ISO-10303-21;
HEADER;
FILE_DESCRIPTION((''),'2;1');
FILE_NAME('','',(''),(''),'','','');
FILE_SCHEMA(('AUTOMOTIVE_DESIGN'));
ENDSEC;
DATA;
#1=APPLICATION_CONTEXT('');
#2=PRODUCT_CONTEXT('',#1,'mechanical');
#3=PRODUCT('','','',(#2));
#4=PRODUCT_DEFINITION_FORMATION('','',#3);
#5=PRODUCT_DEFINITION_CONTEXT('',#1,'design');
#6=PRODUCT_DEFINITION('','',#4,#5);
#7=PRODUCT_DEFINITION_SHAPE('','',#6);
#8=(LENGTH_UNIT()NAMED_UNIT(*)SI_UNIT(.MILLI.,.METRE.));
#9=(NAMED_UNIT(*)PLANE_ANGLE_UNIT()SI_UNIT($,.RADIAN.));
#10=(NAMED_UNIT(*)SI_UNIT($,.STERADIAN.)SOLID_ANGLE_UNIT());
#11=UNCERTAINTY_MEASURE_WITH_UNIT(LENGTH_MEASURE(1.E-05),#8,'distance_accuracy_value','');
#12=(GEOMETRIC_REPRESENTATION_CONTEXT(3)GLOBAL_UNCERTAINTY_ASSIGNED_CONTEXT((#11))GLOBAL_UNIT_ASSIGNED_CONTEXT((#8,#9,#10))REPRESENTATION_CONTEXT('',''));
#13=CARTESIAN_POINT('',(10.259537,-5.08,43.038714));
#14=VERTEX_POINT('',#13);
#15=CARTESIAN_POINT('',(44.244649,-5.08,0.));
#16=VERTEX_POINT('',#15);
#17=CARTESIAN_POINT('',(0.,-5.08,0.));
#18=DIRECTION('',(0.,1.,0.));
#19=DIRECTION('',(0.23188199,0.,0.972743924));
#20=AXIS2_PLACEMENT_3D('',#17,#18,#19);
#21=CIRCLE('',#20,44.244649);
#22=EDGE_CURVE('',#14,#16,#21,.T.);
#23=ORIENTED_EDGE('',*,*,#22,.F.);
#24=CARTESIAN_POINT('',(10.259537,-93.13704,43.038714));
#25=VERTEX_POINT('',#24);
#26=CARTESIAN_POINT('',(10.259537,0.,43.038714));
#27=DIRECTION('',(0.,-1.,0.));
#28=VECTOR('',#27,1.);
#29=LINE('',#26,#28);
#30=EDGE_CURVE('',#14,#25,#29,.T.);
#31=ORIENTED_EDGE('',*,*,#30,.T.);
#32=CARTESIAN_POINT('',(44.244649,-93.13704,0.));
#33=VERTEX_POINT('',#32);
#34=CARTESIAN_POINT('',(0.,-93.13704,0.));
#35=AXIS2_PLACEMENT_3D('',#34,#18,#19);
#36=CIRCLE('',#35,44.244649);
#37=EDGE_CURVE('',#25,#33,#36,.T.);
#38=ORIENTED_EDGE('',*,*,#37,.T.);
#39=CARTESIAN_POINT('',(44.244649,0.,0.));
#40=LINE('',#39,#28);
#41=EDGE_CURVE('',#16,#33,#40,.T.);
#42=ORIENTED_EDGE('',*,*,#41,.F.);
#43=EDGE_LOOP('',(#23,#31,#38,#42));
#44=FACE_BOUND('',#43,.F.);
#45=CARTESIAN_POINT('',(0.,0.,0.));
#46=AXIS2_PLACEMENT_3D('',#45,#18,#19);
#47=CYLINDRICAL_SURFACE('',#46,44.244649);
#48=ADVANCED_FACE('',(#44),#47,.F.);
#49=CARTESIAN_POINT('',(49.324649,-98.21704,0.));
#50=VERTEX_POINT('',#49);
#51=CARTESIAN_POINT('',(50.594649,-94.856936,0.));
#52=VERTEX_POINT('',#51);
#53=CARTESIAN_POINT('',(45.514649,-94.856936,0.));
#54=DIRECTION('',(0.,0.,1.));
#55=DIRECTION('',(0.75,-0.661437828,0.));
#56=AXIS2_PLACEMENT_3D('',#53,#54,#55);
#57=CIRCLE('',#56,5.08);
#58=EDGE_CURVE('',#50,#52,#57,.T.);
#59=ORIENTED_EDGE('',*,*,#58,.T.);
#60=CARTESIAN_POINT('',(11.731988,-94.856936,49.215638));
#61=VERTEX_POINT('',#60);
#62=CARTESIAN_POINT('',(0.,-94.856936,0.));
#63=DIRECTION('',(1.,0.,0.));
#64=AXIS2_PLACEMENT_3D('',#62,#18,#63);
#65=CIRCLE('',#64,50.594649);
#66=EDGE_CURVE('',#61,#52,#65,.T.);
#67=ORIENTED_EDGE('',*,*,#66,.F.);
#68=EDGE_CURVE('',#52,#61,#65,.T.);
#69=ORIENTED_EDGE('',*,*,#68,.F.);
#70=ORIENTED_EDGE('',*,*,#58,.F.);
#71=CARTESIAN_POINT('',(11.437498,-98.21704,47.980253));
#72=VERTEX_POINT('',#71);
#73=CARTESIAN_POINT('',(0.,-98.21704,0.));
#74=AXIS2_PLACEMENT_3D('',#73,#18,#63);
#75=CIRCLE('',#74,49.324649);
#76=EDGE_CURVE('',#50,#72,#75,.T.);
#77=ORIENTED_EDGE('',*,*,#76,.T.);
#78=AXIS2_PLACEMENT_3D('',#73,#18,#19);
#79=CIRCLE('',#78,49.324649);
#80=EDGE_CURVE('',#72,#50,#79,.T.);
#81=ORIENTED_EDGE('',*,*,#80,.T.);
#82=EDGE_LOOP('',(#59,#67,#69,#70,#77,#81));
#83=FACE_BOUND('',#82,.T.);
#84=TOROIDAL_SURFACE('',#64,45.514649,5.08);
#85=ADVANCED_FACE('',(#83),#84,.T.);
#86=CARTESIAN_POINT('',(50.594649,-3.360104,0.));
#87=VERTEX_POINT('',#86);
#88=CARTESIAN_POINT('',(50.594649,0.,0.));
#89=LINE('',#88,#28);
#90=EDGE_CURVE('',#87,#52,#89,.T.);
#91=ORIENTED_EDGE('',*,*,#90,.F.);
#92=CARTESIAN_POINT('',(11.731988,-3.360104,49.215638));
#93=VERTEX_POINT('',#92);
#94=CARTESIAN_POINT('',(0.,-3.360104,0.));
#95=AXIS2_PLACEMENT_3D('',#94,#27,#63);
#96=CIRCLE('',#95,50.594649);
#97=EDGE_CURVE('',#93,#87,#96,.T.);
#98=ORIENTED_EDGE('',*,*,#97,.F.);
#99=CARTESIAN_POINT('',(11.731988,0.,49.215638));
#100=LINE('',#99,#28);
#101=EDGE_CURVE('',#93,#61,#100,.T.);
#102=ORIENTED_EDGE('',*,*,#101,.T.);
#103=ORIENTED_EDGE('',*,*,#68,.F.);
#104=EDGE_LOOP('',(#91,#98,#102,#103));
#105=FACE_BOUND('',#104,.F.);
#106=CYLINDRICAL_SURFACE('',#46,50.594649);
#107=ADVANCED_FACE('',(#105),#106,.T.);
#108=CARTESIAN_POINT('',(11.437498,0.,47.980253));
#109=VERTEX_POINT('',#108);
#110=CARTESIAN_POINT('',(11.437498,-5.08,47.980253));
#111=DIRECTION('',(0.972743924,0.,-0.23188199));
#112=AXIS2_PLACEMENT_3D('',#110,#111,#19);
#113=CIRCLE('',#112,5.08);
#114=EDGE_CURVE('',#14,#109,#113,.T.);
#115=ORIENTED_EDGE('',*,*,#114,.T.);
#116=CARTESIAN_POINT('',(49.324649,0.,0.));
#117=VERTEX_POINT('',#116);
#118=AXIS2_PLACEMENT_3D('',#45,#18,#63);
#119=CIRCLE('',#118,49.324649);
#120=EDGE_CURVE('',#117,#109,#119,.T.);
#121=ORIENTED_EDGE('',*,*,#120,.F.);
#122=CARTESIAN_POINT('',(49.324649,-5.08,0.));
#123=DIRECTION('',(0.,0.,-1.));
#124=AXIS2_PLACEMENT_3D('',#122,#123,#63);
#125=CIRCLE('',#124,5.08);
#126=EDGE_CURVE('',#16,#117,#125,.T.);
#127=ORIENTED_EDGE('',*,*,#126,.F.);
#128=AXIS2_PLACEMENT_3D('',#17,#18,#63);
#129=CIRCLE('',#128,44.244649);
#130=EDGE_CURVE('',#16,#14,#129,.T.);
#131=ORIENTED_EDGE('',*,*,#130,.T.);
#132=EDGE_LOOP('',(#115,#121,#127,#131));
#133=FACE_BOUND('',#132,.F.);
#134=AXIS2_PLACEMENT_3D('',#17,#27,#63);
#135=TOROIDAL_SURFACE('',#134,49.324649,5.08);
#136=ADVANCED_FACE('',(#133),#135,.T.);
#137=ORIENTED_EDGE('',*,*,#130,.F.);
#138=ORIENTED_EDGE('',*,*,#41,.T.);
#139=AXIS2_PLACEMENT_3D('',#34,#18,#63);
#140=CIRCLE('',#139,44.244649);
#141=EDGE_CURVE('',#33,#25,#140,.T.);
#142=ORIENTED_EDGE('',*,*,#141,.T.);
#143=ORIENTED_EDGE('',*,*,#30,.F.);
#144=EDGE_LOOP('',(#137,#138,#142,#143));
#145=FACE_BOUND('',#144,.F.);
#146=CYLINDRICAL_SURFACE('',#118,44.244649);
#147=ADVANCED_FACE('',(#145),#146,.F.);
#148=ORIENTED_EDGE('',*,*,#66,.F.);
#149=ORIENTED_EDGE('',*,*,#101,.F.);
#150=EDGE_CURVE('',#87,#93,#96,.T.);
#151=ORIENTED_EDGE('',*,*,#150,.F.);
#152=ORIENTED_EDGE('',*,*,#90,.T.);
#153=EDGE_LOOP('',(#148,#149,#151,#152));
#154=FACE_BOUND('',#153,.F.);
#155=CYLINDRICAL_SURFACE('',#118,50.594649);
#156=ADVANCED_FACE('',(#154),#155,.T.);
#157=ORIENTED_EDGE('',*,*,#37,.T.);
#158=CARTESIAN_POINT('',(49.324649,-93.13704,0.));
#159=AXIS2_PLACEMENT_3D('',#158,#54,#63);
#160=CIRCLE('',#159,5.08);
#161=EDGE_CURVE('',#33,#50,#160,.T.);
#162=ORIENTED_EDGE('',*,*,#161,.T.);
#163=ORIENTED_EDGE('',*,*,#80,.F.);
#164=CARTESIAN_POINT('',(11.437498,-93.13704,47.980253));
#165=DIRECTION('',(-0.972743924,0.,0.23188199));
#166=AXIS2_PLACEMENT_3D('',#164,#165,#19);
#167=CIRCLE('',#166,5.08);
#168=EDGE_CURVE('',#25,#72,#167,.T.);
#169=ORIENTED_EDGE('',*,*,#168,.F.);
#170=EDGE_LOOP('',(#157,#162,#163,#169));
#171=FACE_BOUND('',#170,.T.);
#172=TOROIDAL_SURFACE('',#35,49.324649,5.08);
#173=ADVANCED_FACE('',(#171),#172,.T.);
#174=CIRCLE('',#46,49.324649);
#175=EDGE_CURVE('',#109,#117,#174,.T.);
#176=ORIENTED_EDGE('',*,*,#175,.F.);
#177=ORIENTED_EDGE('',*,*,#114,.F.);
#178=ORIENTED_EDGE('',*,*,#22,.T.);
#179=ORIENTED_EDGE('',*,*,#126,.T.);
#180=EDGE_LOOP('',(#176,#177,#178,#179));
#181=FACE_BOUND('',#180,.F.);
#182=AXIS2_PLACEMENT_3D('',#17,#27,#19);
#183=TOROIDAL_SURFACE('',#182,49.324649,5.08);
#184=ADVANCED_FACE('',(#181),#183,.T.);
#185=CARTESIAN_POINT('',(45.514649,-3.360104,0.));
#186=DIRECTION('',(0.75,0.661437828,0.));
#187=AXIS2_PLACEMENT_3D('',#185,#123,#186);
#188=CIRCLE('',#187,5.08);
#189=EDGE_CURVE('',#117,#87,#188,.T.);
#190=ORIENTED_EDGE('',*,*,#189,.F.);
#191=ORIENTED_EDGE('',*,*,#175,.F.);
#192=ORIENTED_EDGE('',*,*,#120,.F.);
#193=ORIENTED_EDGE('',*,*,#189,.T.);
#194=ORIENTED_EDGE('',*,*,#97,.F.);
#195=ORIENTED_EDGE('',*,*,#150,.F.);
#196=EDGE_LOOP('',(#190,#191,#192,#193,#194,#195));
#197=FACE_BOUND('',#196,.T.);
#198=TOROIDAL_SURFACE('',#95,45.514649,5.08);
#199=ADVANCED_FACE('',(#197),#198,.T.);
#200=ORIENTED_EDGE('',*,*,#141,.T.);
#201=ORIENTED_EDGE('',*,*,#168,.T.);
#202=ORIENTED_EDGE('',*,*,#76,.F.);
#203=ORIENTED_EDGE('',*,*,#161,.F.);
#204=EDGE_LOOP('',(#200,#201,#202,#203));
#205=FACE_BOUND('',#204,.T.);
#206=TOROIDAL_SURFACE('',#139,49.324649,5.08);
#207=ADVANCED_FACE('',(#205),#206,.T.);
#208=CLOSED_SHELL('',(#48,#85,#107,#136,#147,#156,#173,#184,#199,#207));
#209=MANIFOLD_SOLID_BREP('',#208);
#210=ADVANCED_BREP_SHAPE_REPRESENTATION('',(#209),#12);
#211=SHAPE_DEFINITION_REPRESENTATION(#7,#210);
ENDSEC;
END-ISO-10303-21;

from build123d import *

# Parameters (mm, degrees)
F1_DEPTH = 98.21704
F2_R     = 5.08
F4_R     = 5.08


# Not quite as in the source:
# - a fillet or chamfer that OpenCascade refuses, or shapes differently, is made with other operations: its cross-section is extruded or revolved along the edge and cut away or added


with BuildPart() as f1:
    # F0 (on Front) → F1 (new body)
    with BuildSketch(Plane.XZ):
        with BuildLine():
            ThreePointArc((11.7319880136, 49.2156378568), (-39.7076464503, -31.3547662371), (50.5946494444, 0))
            ThreePointArc((50.5946494444, 0), (39.7076464503, 31.3547662371), (11.7319880136, 49.2156378568))
        make_face()
        with BuildLine():
            ThreePointArc((44.2446494444, 0), (-34.7240452646, -27.4195128498), (10.2595373749, 43.0387139366))
            ThreePointArc((10.2595373749, 43.0387139366), (34.7240452646, 27.4195128498), (44.2446494444, 0))
        make_face(mode=Mode.SUBTRACT)
    extrude(amount=F1_DEPTH)

    # F2
    f2_edges = [f1.edges().sort_by_distance(p)[0] for p in [
        (-10.259537, -98.21704, -43.038714),
    ]]
    fillet(f2_edges, radius=F2_R)

    # F3: fillet of radius 5.08 on 1 edges, made by hand

    # F3_s1 → F3_t2 (revolve, cut)
    with BuildSketch(Plane.XY):
        with BuildLine():
            ThreePointArc((49.3246494444, -98.21704), (50.2665543256, -96.6529870592), (50.5946494444, -94.8569358349))
            Line((50.5946494444, -94.8569358349), (50.5946494444, -98.21704))
            Line((50.5946494444, -98.21704), (49.3246494444, -98.21704))
        make_face()
    revolve(axis=Axis((0, -98.21704, 0), (0, 1, 0)), mode=Mode.SUBTRACT)

    # F4
    f4_edges = [f1.edges().sort_by_distance(p)[0] for p in [
        (-10.259537, 0, -43.038714),
    ]]
    fillet(f4_edges, radius=F4_R)

    # F5: fillet of radius 5.08 on 1 edges, made by hand

    # F5_s1 → F5_t2 (revolve, cut)
    with BuildSketch(Plane.XY):
        with BuildLine():
            ThreePointArc((49.3246494444, 0), (50.2665543256, -1.5640529408), (50.5946494444, -3.3601041651))
            Line((50.5946494444, -3.3601041651), (50.5946494444, 0))
            Line((50.5946494444, 0), (49.3246494444, 0))
        make_face()
    revolve(axis=Axis((0, 0, 0), (0, -1, 0)), mode=Mode.SUBTRACT)


solid = f1.part
